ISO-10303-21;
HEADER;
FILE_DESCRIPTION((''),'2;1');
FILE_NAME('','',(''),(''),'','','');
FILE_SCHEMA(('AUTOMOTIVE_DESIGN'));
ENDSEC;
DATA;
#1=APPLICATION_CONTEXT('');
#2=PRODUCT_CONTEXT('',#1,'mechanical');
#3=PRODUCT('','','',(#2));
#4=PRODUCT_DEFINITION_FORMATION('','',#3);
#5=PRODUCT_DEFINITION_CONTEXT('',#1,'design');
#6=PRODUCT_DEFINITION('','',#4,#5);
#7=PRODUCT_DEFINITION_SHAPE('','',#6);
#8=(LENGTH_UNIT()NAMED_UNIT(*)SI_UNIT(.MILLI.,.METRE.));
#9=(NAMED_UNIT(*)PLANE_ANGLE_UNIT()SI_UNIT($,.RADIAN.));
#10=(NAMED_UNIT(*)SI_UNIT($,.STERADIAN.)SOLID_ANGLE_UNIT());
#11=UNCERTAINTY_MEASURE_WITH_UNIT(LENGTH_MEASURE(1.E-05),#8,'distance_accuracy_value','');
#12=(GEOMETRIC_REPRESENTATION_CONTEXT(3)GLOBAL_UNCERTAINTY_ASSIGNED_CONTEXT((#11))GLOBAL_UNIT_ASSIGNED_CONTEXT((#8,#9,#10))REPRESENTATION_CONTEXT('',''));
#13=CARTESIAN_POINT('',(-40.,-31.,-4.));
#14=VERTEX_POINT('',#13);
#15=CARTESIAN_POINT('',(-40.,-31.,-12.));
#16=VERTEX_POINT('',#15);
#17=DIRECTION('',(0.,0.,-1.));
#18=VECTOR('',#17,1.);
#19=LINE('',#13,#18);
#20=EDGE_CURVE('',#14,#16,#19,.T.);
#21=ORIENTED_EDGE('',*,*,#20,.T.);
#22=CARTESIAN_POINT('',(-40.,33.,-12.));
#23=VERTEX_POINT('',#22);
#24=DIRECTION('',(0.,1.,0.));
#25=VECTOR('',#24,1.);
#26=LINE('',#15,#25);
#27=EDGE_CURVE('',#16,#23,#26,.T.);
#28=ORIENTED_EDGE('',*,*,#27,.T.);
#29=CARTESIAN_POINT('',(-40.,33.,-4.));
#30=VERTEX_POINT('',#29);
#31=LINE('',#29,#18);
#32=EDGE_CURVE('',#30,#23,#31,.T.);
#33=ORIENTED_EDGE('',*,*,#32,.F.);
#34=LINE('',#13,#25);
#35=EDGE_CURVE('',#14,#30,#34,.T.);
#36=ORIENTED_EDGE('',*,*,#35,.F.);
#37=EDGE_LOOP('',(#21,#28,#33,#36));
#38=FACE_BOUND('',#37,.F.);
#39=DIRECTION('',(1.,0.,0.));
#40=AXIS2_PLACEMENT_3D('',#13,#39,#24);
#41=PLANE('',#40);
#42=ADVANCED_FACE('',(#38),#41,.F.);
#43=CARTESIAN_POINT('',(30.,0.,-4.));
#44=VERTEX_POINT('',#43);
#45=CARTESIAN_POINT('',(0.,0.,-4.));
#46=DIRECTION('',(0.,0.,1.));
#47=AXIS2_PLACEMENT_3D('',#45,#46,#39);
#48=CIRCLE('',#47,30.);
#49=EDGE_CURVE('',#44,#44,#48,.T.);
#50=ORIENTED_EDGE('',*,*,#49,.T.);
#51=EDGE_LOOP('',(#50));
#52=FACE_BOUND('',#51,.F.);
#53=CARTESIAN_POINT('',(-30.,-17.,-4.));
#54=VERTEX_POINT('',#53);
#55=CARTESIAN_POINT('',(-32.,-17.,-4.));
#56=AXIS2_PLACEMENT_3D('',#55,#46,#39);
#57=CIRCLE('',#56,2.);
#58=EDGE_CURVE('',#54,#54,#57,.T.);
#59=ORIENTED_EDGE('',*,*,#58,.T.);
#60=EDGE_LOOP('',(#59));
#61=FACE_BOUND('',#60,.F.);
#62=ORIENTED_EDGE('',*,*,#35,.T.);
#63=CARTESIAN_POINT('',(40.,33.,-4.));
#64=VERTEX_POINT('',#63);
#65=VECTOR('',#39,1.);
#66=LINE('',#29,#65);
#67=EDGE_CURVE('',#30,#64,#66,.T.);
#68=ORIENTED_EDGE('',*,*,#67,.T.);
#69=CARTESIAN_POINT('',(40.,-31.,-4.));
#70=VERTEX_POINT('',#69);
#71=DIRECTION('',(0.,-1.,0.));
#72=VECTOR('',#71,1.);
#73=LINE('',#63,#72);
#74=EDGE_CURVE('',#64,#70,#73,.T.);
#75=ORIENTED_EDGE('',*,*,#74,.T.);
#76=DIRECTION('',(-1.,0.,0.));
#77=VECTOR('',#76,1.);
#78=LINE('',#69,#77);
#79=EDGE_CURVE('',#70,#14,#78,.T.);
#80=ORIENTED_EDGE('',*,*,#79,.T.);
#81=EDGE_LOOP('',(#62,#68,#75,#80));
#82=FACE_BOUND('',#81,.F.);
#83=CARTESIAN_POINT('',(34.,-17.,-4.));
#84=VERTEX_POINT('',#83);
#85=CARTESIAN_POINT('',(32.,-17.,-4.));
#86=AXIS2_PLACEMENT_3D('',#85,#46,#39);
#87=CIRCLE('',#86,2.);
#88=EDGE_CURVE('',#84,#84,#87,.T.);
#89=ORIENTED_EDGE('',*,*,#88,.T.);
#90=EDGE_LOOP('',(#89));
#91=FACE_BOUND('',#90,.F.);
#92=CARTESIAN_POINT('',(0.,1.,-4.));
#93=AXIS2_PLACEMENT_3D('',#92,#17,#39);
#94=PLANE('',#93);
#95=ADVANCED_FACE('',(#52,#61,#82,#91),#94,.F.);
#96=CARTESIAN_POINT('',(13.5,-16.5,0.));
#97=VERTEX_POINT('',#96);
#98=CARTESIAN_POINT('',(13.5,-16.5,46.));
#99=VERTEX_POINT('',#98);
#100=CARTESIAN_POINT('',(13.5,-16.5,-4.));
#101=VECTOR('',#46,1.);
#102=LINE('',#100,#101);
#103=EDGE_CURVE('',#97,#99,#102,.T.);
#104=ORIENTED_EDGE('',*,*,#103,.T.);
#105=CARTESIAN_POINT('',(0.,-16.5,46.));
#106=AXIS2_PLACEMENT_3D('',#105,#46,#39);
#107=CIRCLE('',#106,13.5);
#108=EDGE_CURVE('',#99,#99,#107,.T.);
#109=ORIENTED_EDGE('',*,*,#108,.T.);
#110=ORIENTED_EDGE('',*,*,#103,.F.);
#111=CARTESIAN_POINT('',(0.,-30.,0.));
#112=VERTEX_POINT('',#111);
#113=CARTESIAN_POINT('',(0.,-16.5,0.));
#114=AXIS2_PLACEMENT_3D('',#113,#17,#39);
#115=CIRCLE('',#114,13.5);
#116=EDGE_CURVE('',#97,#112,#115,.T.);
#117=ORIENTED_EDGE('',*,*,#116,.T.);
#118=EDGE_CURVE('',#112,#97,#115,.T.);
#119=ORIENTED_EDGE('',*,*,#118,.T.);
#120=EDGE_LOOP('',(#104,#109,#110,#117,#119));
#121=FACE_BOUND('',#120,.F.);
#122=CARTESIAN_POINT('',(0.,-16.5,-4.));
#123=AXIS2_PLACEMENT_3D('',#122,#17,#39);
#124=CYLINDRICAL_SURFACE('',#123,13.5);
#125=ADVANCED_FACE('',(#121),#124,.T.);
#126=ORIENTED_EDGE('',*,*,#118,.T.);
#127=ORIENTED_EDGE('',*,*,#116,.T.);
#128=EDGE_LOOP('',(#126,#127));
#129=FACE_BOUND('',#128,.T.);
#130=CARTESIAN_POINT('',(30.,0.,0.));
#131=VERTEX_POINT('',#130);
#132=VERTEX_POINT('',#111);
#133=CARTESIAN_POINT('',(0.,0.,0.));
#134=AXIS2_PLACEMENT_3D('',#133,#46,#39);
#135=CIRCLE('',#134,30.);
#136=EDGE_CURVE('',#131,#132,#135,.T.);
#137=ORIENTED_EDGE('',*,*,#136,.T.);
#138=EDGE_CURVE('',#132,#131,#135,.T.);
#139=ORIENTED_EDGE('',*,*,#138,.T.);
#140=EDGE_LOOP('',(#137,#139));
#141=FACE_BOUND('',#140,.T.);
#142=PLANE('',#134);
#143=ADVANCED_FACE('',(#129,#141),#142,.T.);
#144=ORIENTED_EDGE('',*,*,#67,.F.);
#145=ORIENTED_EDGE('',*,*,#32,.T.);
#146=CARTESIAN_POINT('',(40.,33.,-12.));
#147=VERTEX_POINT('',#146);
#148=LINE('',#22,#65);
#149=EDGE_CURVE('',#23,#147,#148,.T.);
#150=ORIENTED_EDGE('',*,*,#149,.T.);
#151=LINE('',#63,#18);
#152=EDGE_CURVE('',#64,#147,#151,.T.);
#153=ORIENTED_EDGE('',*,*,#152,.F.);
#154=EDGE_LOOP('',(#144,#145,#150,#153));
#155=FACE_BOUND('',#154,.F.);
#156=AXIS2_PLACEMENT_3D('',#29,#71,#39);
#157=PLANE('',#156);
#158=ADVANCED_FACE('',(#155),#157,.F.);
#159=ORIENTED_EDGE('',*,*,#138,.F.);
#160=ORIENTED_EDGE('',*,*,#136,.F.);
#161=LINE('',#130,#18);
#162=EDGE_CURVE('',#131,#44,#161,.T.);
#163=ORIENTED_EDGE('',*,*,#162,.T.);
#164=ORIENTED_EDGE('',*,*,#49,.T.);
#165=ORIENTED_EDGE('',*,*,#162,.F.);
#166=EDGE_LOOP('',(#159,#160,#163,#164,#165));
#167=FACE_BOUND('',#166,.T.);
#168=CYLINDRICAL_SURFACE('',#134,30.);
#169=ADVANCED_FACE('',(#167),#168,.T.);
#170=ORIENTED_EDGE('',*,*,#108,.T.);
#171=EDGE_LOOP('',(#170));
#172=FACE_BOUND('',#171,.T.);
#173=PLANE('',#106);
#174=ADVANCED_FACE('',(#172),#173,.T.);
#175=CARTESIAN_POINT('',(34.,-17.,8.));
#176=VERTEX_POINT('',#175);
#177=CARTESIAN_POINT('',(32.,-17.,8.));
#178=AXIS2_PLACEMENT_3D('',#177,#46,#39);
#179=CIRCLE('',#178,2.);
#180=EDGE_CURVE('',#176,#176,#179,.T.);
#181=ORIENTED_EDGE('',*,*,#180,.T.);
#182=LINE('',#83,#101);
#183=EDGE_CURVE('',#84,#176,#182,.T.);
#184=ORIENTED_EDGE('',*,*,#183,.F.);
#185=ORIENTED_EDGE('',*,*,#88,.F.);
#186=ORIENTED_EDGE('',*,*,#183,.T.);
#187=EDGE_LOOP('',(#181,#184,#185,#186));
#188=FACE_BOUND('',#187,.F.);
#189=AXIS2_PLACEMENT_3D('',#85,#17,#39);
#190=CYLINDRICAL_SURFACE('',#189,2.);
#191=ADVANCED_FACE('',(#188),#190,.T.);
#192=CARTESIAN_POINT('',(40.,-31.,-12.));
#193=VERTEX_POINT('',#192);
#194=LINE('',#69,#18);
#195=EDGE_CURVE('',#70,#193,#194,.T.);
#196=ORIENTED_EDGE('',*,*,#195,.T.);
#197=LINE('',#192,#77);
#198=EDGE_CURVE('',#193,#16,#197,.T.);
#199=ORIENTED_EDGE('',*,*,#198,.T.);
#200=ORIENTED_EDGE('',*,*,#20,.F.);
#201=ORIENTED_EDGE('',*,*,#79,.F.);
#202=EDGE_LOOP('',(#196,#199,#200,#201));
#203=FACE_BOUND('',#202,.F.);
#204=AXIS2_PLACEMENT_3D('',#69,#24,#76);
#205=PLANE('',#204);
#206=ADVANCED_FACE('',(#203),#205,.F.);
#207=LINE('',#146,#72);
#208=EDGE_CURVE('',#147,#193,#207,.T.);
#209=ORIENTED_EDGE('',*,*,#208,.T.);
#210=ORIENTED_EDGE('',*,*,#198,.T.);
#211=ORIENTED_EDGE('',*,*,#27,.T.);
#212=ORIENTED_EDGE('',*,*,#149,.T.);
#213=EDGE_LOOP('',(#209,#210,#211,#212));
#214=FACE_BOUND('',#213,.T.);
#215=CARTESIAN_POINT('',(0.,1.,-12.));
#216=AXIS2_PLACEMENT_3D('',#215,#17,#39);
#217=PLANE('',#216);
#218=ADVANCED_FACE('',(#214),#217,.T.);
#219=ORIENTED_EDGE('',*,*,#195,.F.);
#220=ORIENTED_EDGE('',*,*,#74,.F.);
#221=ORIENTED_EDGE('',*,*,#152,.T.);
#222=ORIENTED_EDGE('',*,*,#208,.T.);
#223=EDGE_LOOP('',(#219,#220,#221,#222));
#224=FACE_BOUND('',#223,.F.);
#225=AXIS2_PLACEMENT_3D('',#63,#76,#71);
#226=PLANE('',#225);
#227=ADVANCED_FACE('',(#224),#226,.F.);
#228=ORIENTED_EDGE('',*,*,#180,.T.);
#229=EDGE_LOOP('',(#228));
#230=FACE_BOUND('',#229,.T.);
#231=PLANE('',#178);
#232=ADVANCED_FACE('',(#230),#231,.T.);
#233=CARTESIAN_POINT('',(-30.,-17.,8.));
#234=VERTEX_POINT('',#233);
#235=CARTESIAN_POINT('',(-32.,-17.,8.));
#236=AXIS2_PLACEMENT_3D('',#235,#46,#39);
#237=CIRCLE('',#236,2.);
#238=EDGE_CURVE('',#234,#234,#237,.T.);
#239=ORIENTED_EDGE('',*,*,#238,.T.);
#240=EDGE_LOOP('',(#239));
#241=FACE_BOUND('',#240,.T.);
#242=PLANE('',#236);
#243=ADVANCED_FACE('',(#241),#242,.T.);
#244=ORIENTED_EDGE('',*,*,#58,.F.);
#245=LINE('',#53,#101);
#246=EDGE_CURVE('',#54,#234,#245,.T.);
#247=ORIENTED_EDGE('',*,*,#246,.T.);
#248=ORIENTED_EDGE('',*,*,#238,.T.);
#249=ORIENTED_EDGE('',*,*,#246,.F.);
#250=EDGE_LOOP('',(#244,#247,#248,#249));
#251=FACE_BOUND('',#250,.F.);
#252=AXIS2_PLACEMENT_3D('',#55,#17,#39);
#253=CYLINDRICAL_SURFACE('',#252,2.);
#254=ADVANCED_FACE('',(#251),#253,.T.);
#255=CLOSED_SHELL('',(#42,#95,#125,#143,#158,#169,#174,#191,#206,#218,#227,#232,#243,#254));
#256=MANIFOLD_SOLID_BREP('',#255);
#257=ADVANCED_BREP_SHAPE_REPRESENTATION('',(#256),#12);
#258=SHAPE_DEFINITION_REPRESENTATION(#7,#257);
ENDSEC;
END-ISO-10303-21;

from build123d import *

# Parameters (mm, degrees)
F0_R     = 30
F1_DEPTH = 4
F3_DEPTH = 8
F4_R     = 2
F5_DEPTH = 12
F6_R     = 13.5
F7_DEPTH = 50


with BuildPart() as f1:
    # F0 (on Top) → F1 (new body)
    with BuildSketch(Plane.XY):
        Circle(F0_R)
    extrude(amount=-F1_DEPTH)

    # F2 (on face) → F3 (join)
    with BuildSketch(Plane(origin=(0, 0, -4), x_dir=(1, 0, 0), z_dir=(0, 0, -1))):
        Polygon((-40, 31), (-40, -33), (40, -33), (40, 31), (0, 31), align=None)
        with BuildLine():
            ThreePointArc((30, 0), (-21.2132034356, -21.2132034356), (0, 30))
            ThreePointArc((0, 30), (21.2132034356, 21.2132034356), (30, 0))
        make_face(mode=Mode.SUBTRACT)
        with BuildLine():
            ThreePointArc((30, 0), (21.2132034356, 21.2132034356), (0, 30))
            ThreePointArc((0, 30), (-21.2132034356, -21.2132034356), (30, 0))
        make_face()
    extrude(amount=F3_DEPTH)

    # F4 (on face) → F5 (join)
    with BuildSketch(Plane.XY.offset(-4)):
        with Locations((-32, -17)):
            Circle(F4_R)
        with Locations((32, -17)):
            Circle(F4_R)
    extrude(amount=F5_DEPTH)

    # F6 (on face) → F7 (join)
    with BuildSketch(Plane.XY.offset(-4)):
        with Locations((0, -16.5)):
            Circle(F6_R)
    extrude(amount=F7_DEPTH)


solid = f1.part
